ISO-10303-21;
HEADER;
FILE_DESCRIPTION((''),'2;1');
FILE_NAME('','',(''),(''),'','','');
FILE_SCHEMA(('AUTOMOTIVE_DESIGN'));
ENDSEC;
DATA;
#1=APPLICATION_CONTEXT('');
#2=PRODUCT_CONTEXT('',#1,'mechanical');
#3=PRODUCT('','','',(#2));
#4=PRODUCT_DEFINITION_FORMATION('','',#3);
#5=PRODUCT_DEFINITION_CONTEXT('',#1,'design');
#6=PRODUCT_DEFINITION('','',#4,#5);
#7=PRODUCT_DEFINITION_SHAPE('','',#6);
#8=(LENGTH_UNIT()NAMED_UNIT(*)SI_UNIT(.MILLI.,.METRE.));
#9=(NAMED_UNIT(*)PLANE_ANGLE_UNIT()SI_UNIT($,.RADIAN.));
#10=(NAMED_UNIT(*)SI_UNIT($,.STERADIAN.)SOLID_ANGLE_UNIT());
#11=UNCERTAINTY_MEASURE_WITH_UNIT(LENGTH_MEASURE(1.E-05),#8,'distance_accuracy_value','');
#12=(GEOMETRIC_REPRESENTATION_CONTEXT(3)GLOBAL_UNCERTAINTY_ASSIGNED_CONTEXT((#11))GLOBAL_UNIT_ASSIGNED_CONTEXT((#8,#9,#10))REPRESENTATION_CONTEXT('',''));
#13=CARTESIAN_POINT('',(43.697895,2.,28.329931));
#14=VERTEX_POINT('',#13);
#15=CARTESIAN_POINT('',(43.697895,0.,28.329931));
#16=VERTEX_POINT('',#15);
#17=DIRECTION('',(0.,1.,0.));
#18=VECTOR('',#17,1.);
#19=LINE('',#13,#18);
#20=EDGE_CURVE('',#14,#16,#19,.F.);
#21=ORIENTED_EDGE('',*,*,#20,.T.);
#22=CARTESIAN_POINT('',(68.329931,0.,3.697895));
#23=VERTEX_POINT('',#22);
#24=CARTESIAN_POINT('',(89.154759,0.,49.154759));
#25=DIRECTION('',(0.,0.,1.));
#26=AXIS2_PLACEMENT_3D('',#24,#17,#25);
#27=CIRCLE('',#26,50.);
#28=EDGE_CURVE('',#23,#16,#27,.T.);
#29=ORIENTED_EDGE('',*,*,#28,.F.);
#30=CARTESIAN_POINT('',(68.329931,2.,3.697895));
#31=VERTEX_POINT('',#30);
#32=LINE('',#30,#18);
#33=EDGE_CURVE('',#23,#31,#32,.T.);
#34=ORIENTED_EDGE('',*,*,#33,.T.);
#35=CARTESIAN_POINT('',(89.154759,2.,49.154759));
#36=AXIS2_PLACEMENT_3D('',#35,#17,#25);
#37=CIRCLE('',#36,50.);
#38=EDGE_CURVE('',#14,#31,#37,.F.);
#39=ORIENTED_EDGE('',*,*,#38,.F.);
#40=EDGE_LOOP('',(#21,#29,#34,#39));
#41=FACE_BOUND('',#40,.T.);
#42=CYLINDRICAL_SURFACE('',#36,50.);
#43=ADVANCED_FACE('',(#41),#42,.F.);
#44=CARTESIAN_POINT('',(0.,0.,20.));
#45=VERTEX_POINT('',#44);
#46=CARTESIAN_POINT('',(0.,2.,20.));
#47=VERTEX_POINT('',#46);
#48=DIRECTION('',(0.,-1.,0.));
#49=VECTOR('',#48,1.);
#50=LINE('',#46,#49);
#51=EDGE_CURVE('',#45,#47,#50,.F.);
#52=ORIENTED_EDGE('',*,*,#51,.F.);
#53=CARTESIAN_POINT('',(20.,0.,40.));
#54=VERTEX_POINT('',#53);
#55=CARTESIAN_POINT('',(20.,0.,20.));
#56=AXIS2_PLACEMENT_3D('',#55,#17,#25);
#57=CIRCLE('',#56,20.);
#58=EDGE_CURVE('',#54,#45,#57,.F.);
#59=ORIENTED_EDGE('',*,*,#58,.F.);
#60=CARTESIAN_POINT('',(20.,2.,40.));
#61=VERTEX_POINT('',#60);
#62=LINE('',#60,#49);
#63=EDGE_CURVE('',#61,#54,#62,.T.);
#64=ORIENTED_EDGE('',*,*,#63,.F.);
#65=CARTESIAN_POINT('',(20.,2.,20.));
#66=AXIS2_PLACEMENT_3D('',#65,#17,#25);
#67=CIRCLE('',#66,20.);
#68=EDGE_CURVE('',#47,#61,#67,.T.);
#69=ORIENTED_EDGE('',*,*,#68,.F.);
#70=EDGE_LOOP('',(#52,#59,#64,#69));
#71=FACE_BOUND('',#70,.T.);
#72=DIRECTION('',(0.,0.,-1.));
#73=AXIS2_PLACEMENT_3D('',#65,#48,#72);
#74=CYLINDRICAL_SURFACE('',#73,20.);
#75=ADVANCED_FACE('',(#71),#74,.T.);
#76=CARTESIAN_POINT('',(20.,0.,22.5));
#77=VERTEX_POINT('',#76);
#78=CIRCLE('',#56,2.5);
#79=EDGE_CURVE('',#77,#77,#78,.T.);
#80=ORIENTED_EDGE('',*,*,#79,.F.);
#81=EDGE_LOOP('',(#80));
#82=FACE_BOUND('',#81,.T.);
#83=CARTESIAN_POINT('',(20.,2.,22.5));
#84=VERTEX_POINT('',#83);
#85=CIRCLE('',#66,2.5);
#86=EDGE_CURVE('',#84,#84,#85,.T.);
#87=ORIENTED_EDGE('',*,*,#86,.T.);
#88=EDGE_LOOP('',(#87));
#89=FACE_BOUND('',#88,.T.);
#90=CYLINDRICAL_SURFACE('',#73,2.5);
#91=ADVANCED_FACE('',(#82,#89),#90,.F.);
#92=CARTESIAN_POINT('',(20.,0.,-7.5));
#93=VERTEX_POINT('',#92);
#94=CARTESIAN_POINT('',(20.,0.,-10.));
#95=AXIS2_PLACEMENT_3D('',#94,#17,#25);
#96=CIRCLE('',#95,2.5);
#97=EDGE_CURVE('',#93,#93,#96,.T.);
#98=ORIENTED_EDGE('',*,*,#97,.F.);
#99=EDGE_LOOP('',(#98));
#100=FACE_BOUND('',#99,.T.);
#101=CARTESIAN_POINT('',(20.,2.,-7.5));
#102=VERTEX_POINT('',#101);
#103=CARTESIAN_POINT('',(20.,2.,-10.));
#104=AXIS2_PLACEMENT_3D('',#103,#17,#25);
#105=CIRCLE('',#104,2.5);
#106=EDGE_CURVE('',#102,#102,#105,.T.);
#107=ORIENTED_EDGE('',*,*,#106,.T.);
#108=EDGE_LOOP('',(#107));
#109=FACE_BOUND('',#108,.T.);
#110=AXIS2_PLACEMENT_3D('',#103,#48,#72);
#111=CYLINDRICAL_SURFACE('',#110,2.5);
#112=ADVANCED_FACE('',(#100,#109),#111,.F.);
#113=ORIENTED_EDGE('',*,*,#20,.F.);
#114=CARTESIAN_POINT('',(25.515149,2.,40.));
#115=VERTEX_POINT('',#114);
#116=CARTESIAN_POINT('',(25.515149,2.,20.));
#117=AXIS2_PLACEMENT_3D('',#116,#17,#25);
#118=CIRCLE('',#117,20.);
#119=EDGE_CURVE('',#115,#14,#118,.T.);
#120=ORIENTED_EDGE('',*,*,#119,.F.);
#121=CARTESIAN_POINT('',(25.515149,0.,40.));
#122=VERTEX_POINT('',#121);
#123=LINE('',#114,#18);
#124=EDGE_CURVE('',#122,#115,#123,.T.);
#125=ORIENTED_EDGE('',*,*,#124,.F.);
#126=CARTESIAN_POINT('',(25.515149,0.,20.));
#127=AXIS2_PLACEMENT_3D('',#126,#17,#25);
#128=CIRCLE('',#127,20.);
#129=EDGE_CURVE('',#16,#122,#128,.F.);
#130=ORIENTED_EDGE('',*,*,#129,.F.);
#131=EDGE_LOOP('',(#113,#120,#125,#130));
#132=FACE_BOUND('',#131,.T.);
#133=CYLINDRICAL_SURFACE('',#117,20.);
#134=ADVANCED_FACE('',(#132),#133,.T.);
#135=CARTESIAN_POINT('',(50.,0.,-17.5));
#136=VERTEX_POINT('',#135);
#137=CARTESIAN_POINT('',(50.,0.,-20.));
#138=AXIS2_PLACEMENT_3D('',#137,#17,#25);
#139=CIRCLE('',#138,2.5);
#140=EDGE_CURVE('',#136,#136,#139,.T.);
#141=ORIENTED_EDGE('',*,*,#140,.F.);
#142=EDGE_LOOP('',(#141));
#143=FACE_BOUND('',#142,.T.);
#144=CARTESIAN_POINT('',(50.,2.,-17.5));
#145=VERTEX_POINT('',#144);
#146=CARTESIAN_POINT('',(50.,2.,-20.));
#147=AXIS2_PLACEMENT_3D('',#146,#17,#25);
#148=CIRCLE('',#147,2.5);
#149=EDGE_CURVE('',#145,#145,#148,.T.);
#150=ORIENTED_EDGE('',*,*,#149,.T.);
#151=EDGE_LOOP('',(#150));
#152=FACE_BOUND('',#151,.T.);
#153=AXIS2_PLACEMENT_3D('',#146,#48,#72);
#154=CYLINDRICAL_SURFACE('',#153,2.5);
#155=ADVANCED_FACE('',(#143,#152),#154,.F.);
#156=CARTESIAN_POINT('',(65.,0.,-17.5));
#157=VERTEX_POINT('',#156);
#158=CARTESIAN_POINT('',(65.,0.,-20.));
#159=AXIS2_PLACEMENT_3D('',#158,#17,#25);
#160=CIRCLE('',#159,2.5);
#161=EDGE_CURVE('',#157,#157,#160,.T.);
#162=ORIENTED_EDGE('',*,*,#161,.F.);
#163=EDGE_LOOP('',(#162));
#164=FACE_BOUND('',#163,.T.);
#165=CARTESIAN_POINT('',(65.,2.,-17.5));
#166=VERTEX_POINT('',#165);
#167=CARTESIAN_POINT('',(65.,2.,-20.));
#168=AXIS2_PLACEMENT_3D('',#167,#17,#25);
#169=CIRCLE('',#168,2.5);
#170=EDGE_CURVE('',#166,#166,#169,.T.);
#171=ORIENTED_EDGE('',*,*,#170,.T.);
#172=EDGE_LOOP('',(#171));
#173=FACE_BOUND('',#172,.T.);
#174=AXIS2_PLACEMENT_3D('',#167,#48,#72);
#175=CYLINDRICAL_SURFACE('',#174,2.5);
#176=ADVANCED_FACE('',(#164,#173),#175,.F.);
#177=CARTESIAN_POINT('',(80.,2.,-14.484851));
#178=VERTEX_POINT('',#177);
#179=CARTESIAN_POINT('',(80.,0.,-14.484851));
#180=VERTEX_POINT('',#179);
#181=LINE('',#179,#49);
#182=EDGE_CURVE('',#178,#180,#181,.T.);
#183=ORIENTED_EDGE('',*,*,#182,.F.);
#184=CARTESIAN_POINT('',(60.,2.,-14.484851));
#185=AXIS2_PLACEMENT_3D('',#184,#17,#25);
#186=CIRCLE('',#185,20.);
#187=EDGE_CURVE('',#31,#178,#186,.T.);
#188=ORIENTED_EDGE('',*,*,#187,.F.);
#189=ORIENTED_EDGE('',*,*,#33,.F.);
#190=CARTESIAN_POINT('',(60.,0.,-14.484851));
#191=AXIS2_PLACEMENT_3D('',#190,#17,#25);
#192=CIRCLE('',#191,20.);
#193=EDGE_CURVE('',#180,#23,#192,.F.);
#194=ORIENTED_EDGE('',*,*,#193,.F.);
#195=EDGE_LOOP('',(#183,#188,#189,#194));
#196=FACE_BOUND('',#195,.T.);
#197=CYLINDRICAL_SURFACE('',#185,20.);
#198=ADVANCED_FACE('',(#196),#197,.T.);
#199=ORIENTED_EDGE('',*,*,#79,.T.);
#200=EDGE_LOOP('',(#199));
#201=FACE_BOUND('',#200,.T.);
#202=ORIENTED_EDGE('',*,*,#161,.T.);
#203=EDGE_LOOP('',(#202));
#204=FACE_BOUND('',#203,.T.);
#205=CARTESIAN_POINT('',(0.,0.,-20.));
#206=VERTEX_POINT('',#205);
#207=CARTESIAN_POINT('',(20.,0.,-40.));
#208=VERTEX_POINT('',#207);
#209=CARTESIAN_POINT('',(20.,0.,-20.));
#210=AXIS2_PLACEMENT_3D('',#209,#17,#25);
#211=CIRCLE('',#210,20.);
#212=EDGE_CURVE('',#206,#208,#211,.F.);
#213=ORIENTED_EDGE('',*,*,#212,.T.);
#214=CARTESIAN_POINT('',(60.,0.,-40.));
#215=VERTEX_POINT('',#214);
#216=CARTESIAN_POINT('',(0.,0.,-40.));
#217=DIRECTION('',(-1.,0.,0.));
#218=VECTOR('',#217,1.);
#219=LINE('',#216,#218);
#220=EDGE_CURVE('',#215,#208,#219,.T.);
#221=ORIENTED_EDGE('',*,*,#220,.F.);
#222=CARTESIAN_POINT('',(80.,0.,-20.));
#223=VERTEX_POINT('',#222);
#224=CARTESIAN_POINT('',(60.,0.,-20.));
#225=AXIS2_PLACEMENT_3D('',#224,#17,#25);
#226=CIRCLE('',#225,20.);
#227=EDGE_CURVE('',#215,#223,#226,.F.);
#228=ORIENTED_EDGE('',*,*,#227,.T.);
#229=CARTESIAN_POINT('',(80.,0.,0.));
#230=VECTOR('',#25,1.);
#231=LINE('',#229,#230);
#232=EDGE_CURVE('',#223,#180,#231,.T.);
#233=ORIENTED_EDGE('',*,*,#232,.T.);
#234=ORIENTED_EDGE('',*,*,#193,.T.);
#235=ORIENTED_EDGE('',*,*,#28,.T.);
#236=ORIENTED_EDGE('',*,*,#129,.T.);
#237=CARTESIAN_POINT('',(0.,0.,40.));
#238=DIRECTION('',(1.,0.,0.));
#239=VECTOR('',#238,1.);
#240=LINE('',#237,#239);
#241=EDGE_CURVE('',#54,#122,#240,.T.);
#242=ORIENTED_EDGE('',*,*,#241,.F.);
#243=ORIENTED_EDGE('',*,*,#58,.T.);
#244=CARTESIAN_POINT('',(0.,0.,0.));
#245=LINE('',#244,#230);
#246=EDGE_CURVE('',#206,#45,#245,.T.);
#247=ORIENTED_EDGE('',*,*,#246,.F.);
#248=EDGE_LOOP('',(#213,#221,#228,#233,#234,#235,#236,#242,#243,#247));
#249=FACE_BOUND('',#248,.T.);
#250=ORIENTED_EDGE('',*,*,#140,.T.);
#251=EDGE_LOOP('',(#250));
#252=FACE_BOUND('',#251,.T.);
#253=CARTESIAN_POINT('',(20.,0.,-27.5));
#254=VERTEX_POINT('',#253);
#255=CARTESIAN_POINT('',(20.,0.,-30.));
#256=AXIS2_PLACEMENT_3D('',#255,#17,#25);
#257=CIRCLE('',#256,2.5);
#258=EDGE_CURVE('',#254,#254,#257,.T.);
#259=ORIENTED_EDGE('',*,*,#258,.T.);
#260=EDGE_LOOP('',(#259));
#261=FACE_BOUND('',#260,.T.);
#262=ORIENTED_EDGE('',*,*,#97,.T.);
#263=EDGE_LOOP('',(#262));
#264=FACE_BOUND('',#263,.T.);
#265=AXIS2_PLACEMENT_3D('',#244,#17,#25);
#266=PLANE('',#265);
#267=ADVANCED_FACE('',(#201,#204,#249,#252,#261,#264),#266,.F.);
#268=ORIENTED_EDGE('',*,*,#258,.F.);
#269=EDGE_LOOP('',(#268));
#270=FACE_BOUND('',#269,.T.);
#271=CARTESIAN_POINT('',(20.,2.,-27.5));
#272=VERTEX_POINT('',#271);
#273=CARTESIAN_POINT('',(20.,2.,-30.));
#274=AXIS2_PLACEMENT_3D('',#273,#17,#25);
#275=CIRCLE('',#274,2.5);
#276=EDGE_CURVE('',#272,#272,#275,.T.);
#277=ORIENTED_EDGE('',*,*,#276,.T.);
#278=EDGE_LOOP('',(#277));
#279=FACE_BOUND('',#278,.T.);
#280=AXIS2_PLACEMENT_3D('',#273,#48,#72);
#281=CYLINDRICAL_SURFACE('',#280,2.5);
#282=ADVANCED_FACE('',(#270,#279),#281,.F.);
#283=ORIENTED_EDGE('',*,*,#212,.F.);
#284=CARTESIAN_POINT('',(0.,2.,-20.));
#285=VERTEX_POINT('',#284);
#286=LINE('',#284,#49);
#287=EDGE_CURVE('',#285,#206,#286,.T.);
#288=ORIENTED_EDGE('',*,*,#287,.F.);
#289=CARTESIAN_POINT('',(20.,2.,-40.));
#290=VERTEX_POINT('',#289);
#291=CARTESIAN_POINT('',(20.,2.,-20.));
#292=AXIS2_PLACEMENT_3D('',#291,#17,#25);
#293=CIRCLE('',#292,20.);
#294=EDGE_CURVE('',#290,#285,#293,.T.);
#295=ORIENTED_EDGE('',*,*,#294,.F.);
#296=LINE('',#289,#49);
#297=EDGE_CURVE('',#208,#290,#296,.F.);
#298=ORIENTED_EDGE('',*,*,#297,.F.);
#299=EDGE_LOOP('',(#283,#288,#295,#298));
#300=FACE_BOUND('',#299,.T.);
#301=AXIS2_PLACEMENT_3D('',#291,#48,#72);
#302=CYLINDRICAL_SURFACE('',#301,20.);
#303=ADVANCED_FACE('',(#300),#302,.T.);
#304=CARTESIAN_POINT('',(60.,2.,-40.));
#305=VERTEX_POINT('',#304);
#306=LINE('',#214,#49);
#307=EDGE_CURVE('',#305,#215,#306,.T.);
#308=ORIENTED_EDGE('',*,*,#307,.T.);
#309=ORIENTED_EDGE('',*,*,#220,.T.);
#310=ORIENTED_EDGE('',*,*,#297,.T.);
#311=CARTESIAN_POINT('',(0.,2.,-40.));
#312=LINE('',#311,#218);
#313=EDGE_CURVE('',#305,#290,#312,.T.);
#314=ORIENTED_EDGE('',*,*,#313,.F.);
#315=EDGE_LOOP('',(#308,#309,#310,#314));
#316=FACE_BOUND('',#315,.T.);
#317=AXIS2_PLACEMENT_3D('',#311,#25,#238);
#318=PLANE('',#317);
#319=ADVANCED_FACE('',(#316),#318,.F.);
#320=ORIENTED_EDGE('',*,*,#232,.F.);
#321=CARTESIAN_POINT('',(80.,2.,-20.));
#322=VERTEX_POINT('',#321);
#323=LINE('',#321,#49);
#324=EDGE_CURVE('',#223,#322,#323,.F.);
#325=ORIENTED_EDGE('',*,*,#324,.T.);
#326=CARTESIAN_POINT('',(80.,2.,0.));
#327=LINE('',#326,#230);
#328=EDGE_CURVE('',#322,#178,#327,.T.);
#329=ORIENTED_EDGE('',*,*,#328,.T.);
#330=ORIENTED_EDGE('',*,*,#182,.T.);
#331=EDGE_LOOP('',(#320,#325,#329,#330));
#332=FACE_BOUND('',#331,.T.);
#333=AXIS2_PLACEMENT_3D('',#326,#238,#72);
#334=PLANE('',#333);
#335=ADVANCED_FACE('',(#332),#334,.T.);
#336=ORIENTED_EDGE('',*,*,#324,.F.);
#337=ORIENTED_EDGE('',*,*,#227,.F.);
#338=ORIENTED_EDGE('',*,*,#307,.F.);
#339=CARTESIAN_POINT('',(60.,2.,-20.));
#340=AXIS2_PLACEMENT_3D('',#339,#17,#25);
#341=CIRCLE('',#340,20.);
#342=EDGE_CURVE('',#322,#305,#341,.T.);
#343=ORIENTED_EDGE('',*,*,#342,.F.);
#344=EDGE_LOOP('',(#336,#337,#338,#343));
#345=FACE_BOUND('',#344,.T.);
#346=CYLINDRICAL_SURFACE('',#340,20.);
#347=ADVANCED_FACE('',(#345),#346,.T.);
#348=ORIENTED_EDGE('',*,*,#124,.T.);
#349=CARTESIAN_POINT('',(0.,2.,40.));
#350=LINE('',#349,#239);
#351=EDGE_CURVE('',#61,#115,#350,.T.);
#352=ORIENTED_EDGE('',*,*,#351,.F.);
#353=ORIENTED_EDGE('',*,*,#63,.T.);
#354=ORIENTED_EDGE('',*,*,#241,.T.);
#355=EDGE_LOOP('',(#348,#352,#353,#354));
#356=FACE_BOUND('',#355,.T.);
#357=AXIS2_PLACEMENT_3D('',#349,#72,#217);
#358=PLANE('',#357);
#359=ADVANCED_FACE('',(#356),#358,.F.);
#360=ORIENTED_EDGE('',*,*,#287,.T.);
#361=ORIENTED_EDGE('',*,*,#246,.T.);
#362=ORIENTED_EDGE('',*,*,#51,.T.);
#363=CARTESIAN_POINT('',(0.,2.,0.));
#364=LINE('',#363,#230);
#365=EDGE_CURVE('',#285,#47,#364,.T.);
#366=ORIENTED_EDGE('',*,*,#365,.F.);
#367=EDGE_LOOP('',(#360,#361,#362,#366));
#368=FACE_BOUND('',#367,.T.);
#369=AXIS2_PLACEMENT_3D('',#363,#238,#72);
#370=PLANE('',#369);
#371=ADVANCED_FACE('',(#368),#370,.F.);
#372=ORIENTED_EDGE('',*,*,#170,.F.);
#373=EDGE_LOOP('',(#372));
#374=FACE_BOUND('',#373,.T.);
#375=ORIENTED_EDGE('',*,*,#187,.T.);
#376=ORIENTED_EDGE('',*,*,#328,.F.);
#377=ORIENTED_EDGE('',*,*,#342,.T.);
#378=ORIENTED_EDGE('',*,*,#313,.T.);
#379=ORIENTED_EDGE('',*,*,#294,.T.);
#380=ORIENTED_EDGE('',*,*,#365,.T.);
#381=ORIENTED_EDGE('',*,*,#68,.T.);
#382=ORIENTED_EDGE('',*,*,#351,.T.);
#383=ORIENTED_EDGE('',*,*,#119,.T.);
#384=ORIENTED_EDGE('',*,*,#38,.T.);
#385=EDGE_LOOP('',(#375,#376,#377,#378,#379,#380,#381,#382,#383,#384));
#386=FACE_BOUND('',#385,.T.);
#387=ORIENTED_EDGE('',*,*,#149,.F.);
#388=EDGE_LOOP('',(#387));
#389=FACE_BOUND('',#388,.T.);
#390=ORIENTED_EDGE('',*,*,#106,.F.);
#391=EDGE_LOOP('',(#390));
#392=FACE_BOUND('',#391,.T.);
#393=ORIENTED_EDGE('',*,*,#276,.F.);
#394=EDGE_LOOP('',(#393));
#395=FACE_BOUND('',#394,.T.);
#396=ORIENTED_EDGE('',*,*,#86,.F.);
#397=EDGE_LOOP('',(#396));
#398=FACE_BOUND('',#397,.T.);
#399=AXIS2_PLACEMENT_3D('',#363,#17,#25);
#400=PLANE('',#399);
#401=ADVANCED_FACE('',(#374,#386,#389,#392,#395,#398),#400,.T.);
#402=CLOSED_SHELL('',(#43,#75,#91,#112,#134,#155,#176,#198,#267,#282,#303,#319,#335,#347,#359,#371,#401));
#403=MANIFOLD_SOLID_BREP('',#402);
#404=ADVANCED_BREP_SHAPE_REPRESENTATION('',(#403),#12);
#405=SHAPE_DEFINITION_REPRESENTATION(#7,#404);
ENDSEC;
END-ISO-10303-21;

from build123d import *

# Parameters (mm, degrees)
SKETCH1_R           = 2.5
SKETCH1_W           = 40
SKETCH1_H           = 40
BOSS_EXTRUDE1_DEPTH = 2
FILLET1_R           = 50
FILLET2_R           = 20


with BuildPart() as part:
    # Sketch1 → Boss-Extrude1 (new body)
    # profile 1 of 2: a face of its own
    with BuildSketch(Plane(origin=(0, 0, 0), x_dir=(1, 0, 0), z_dir=(0, 1, 0))):
        Polygon((80, 0), (80, 40), (0, 40), (0, 0), (40, 0), align=None)
        with Locations(Location((20, 10, 0), (0, 0, 270))):
            Circle(SKETCH1_R, mode=Mode.SUBTRACT)
        with Locations(Location((20, 30, 0), (0, 0, 270))):
            Circle(SKETCH1_R, mode=Mode.SUBTRACT)
        with Locations(Location((50, 20, 0), (0, 0, 270))):
            Circle(SKETCH1_R, mode=Mode.SUBTRACT)
        with Locations(Location((65, 20, 0), (0, 0, 270))):
            Circle(SKETCH1_R, mode=Mode.SUBTRACT)
    # profile 2 of 2: a face of its own
    with BuildSketch(Plane(origin=(0, 0, 0), x_dir=(1, 0, 0), z_dir=(0, 1, 0))):
        with Locations((20, -20)):
            Rectangle(SKETCH1_W, SKETCH1_H)
        with Locations(Location((20, -20, 0), (0, 0, 270))):
            Circle(SKETCH1_R, mode=Mode.SUBTRACT)
    extrude(amount=BOSS_EXTRUDE1_DEPTH)

    # Fillet1
    # the kernel refuses this fillet: 50 mm, written as the material it adds along each edge
    with BuildSketch(Plane(origin=(40, 0, 0), x_dir=(0, 0, 1), z_dir=(0, 1, 0))) as fillet1_piece_1:
        with BuildLine():
            CenterArc((49.154759474, 49.154759474), FILLET1_R, 190.550098012, 68.899803976)
            Line((0, 40), (0, 0))
            Line((0, 0), (40, 0))
        make_face()
    extrude(amount=2)

    # Fillet2
    fillet2_edges = [part.edges().sort_by_distance(p)[0] for p in [
        (80, 1, -40),
        (80, 1, 0),
        (40, 1, 40),
        (0, 1, 40),
        (0, 1, -40),
    ]]
    fillet(fillet2_edges, radius=FILLET2_R)


solid = part.part
